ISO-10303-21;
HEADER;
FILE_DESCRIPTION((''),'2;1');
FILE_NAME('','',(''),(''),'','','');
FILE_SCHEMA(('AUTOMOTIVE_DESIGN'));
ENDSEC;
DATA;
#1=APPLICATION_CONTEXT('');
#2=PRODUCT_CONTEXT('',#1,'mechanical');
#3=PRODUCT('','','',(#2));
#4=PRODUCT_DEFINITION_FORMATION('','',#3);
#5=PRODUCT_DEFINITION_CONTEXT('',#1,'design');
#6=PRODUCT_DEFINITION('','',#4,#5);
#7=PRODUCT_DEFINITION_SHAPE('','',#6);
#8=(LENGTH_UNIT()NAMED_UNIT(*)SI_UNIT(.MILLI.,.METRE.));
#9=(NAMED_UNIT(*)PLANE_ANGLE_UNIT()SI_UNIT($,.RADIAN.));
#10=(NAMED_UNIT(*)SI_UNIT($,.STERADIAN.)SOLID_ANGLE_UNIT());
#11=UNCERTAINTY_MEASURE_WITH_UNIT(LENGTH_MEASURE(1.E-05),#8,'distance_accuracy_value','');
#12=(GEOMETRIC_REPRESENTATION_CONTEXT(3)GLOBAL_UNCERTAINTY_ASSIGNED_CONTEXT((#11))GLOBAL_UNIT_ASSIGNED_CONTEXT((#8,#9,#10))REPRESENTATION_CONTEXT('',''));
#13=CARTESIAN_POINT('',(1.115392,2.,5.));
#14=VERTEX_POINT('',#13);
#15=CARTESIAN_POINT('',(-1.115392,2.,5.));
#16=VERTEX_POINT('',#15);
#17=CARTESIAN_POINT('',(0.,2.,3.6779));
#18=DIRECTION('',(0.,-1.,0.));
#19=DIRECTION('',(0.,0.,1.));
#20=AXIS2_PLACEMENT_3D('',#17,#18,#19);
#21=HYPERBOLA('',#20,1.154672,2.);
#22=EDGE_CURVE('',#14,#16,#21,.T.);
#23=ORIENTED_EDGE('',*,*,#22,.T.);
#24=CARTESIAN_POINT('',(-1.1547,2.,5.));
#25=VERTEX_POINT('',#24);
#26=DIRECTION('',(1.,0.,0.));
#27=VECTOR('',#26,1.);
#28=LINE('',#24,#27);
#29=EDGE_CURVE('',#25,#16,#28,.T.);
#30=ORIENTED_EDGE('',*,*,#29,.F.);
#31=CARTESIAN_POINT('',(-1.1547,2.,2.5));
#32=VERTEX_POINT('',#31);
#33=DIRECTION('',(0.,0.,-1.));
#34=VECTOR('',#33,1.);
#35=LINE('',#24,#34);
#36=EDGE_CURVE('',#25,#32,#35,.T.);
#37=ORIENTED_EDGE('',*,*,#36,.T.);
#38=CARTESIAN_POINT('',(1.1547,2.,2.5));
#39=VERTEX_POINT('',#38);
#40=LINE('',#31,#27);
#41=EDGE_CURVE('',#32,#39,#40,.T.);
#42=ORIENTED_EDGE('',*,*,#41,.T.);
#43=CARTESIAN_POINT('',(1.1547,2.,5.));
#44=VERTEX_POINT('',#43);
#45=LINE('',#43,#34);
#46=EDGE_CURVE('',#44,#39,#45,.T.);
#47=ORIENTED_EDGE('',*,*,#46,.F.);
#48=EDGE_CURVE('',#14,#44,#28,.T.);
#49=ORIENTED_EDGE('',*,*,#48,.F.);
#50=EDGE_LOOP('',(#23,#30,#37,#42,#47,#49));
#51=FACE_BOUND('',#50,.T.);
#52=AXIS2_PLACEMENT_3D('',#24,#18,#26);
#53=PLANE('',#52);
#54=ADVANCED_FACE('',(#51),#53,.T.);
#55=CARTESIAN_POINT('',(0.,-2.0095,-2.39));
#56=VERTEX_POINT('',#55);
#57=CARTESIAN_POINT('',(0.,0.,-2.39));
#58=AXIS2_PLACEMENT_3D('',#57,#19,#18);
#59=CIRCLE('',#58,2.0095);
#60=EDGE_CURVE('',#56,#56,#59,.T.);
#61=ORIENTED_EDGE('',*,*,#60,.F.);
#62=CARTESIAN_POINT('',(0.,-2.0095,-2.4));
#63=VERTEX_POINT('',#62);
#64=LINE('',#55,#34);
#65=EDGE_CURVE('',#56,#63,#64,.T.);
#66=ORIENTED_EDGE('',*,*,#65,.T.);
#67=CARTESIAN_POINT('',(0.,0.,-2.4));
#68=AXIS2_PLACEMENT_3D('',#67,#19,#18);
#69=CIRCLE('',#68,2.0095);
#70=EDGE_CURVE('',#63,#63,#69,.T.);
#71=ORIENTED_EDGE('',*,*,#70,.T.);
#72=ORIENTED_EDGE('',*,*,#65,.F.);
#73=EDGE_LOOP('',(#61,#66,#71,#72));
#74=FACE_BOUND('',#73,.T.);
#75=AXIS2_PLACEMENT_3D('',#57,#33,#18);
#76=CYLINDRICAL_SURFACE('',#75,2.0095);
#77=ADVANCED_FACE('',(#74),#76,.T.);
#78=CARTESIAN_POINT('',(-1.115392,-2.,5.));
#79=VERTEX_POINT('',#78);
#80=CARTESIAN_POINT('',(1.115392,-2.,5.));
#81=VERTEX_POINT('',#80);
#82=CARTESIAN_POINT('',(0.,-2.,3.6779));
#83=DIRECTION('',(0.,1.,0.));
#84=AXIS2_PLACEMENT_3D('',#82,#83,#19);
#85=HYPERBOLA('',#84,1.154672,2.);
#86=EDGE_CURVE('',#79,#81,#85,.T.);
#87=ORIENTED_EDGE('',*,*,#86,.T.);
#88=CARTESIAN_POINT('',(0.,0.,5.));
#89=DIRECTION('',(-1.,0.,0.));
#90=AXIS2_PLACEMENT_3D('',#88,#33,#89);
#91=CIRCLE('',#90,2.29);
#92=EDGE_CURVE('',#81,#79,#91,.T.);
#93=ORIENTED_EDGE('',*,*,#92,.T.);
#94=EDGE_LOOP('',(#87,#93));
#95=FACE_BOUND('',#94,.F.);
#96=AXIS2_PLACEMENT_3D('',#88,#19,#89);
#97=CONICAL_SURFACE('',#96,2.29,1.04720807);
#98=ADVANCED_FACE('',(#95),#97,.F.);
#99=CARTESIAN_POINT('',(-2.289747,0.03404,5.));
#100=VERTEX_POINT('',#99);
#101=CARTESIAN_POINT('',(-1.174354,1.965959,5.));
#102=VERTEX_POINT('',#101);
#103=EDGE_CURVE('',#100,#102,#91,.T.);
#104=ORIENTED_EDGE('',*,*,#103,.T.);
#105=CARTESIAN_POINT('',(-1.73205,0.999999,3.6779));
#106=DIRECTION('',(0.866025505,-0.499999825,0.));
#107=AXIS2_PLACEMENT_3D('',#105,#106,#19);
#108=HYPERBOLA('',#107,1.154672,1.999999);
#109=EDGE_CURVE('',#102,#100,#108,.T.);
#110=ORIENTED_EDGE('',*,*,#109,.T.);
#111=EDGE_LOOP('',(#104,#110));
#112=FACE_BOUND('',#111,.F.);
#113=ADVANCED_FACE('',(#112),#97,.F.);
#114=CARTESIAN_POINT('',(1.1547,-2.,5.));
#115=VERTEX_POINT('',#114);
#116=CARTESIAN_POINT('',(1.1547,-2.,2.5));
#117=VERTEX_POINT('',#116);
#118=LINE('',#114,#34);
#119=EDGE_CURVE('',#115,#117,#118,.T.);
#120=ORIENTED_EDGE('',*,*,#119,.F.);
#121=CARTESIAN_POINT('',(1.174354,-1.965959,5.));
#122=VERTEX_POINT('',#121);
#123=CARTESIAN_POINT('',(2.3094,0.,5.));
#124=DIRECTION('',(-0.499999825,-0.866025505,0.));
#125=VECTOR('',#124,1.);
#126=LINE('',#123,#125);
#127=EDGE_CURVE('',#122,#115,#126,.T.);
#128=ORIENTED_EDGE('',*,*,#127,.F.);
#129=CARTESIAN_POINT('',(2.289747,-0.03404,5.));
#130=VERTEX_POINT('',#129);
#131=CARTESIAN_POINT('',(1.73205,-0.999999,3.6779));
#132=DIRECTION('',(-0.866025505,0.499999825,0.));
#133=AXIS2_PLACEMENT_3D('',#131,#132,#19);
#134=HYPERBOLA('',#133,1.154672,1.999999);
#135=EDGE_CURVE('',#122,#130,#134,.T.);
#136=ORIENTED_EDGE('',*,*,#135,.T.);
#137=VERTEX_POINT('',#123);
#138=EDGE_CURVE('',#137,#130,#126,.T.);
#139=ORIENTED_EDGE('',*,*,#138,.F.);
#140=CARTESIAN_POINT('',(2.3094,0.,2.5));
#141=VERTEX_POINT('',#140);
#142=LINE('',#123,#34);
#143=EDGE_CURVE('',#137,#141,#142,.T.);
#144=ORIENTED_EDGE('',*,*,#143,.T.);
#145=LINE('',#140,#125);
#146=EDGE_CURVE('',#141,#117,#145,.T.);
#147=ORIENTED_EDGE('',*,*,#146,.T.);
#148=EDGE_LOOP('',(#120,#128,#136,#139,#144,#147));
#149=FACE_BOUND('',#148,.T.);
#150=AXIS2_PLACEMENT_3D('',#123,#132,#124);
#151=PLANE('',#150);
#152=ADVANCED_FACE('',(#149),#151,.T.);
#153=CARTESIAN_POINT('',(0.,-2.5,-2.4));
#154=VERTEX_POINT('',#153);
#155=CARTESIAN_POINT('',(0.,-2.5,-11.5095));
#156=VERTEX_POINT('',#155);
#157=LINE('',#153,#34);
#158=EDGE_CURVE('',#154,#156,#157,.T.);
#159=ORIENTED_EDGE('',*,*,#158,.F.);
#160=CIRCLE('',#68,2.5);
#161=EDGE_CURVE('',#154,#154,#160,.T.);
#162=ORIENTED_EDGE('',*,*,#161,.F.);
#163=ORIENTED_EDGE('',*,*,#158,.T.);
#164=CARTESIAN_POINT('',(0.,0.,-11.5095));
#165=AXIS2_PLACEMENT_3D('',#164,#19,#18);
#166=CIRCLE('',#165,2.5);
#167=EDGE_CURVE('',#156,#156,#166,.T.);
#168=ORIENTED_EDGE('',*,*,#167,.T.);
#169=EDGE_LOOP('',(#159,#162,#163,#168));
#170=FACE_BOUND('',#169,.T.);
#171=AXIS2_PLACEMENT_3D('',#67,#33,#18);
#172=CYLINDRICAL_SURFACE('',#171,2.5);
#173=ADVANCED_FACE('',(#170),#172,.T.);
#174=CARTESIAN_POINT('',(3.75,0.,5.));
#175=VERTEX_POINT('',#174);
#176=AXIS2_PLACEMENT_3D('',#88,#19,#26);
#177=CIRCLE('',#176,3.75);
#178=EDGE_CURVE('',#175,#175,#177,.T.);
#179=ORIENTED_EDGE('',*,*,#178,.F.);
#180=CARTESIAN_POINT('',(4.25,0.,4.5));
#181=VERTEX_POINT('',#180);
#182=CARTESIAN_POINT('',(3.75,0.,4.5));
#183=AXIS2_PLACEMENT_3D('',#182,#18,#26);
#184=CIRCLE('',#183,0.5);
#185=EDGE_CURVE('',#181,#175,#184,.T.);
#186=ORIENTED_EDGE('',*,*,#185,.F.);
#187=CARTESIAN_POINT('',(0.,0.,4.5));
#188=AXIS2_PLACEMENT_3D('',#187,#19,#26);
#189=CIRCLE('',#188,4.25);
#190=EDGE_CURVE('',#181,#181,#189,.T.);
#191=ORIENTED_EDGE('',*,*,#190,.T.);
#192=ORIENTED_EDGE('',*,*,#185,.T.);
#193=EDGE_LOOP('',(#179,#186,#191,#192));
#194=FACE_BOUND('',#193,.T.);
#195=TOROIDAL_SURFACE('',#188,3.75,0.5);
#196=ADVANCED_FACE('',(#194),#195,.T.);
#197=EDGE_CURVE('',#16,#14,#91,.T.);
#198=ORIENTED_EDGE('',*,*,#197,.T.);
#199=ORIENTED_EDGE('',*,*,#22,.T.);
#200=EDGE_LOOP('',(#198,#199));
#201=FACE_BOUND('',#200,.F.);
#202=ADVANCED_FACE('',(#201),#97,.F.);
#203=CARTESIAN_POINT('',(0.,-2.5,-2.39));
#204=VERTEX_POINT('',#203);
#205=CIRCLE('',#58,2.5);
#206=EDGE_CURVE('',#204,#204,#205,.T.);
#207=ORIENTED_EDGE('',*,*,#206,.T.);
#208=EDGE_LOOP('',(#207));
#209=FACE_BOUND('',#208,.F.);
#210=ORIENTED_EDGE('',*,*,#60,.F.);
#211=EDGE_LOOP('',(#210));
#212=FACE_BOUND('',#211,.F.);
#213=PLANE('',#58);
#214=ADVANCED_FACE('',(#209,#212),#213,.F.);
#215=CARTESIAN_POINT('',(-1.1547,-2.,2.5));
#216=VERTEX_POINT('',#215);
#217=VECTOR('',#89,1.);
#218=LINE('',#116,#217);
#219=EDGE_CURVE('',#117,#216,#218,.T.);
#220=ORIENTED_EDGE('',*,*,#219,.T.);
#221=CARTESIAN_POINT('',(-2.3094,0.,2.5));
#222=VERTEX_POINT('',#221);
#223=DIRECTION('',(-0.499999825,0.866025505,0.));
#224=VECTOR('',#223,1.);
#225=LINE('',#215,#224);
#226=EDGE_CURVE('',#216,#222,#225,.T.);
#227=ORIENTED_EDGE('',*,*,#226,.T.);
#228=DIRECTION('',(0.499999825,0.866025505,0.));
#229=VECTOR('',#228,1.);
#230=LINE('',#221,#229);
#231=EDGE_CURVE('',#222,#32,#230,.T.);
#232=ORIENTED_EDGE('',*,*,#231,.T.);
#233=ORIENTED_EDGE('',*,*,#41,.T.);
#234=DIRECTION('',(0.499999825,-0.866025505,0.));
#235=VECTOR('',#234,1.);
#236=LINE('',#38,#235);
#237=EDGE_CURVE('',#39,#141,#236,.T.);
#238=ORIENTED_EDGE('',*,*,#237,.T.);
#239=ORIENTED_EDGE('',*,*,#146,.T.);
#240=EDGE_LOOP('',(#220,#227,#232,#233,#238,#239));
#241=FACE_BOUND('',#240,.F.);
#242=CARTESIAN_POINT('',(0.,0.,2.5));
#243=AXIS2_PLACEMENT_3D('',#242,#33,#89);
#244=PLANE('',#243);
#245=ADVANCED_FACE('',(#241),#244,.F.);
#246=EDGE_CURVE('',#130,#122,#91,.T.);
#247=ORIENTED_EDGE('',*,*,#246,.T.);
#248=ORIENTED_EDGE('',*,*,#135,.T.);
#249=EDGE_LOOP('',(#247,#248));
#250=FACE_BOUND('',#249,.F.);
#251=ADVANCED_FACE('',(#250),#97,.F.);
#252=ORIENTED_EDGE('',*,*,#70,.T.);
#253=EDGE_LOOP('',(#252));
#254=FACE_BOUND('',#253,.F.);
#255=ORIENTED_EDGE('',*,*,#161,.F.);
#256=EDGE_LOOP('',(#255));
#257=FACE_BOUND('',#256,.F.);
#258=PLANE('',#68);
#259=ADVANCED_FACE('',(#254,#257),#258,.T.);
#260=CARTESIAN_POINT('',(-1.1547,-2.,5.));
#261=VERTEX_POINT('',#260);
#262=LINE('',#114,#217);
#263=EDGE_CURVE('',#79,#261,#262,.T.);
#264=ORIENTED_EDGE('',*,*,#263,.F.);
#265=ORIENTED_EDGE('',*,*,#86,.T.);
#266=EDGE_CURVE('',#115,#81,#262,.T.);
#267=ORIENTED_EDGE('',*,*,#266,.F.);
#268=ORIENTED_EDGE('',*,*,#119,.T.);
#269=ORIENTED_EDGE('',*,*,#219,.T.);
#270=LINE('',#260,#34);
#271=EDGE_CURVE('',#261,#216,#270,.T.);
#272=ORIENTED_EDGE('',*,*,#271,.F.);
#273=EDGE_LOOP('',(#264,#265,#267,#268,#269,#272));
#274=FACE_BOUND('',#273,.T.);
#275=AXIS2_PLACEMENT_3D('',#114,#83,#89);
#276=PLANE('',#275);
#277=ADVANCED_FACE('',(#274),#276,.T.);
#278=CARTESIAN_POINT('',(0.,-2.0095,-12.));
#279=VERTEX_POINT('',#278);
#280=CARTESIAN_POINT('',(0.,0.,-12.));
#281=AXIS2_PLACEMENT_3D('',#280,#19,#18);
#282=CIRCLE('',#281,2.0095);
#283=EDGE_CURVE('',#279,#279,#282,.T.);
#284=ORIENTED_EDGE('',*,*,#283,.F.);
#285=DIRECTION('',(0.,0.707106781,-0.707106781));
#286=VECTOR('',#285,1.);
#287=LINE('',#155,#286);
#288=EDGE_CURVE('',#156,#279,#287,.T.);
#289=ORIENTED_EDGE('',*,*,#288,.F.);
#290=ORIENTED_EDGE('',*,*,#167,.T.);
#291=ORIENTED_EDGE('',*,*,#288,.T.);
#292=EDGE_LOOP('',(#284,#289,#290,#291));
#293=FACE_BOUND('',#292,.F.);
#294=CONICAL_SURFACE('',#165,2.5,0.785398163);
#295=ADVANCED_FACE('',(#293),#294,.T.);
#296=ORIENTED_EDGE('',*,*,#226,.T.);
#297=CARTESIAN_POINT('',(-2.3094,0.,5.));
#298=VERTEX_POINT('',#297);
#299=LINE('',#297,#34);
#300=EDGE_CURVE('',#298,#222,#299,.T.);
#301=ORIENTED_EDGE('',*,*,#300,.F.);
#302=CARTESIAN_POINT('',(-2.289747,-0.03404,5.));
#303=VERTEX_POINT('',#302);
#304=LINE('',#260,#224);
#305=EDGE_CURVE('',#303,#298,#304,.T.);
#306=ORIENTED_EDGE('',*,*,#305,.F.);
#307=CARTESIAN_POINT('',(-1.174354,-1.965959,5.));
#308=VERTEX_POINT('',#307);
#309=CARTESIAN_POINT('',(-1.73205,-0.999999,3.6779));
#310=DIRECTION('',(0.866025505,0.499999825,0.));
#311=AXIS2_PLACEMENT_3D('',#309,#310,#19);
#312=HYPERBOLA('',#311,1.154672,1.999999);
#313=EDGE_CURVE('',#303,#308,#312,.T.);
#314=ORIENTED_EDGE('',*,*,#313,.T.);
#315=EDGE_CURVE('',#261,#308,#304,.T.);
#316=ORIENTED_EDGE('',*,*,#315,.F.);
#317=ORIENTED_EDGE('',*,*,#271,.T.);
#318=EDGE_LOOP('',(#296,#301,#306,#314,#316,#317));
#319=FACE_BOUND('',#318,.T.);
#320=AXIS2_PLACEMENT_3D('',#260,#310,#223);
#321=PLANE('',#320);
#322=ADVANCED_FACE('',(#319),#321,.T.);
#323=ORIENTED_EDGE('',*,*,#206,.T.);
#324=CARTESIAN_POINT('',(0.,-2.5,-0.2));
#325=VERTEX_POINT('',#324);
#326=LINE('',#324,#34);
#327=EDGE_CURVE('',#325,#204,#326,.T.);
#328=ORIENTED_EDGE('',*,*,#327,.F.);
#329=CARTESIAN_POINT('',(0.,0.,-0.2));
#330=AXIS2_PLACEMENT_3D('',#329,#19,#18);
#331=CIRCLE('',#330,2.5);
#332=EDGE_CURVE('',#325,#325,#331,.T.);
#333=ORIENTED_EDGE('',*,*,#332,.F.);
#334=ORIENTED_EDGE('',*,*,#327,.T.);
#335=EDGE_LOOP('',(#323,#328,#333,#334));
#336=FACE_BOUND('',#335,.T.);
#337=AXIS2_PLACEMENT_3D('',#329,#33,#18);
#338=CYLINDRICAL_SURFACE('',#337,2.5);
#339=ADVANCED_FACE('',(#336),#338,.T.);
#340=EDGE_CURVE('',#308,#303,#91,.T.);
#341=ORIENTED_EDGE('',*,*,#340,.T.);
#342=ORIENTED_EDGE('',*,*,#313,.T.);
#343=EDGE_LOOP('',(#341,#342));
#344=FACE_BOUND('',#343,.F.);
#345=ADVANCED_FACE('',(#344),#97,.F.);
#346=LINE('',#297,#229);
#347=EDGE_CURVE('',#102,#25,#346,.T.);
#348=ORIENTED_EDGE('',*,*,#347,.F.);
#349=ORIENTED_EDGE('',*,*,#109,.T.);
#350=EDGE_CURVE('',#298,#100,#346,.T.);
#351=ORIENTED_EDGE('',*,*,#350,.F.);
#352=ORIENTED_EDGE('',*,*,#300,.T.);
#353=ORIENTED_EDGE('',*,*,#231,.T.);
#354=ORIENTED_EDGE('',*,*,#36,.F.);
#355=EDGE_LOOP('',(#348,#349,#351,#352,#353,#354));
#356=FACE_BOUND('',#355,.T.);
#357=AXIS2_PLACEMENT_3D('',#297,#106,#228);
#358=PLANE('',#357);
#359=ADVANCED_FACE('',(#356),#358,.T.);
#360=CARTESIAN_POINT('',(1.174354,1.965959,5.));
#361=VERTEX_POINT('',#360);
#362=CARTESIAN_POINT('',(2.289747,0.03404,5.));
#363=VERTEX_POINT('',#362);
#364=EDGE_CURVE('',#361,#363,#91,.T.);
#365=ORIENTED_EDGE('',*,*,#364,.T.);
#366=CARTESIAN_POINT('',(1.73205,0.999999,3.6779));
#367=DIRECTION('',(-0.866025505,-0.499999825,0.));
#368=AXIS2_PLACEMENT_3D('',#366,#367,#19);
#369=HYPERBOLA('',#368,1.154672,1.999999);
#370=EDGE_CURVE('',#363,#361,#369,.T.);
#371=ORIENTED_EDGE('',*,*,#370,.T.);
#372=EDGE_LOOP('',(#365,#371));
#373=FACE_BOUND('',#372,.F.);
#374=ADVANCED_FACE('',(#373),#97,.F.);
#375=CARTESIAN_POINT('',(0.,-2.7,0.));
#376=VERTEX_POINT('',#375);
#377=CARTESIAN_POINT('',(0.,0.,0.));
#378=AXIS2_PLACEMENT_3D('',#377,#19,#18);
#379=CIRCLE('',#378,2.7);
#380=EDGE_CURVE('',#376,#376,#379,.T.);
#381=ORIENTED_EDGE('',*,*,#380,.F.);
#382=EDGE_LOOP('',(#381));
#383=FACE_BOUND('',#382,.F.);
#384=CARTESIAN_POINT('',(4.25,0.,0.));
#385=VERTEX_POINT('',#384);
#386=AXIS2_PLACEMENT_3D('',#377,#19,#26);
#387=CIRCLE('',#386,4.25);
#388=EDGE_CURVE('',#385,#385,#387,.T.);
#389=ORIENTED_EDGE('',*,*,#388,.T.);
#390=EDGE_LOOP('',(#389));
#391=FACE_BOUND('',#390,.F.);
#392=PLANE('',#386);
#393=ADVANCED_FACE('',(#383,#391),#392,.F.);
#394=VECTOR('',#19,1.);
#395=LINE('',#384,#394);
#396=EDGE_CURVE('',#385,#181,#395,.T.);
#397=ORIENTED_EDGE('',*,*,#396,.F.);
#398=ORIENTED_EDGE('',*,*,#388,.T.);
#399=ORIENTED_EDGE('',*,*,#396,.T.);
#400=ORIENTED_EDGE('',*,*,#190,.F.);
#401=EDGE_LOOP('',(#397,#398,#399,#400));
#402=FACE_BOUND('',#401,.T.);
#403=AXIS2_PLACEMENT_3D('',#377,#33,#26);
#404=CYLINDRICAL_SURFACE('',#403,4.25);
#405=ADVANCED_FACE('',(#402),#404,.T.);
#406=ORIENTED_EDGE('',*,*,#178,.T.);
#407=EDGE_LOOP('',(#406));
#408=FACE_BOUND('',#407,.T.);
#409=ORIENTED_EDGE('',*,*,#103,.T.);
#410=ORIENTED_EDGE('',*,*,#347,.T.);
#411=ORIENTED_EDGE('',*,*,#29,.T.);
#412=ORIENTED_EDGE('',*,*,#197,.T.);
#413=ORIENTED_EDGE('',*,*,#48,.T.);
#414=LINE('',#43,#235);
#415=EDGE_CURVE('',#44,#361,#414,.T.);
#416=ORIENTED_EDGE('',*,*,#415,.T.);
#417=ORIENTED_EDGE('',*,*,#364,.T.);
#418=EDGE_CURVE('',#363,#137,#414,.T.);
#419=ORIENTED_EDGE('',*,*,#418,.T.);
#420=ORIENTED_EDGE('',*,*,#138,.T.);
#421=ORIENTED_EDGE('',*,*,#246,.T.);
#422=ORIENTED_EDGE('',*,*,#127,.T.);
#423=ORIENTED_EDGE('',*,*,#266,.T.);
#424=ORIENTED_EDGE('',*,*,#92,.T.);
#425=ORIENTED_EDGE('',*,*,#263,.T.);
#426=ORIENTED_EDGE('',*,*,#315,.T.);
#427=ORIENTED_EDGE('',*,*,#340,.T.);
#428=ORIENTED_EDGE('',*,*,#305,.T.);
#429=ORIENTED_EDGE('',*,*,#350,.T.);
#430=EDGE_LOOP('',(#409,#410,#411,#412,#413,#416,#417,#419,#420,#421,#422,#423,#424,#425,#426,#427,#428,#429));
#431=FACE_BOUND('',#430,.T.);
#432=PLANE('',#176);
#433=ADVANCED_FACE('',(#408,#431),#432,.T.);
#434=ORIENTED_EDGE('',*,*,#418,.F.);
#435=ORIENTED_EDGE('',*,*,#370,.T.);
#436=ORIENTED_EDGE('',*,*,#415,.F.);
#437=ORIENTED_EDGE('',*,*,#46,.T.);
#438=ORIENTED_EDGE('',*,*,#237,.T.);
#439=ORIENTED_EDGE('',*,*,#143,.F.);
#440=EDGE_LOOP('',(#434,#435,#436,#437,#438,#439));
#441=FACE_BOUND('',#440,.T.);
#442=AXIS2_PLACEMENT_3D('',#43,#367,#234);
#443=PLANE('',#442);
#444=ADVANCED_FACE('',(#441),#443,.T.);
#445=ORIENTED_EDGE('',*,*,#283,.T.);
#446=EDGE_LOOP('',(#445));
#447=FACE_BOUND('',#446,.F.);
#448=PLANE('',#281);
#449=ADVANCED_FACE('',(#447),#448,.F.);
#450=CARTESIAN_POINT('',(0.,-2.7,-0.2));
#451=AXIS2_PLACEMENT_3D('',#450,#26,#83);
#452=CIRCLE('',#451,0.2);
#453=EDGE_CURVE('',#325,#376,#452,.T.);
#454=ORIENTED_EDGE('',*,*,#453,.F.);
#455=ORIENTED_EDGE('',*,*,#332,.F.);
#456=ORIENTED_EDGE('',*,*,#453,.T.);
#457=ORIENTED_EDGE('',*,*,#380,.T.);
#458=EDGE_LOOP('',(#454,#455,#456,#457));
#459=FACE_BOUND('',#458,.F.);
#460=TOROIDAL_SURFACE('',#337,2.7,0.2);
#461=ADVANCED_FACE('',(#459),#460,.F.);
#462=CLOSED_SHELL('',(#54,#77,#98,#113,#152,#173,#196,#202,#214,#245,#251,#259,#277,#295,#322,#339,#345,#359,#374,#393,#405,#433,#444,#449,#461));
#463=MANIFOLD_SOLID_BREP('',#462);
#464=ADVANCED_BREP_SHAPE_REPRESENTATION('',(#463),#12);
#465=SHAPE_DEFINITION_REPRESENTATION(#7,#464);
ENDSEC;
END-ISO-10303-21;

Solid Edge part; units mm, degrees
sketch "Sketch1" plane through (0, 0, 0) normal (0, 0, 1) x (1, 0, 0)
  circle A0 centre (0, 0) radius 4.25
extrude "Protrusion1" add sketch "Sketch1" along normal blind 5
sketch "Sketch2" plane through (0, 0, 5) normal (0, 0, 1) x (0, 1, 0)
  line L0 (0, 2.3094) -> (2, 1.1547)
  line L1 (2, 1.1547) -> (2, -1.1547)
  line L2 (2, -1.1547) -> (0, -2.3094)
  line L3 (0, -2.3094) -> (-2, -1.1547)
  line L4 (-2, -1.1547) -> (-2, 1.1547)
  line L5 (-2, 1.1547) -> (0, 2.3094)
extrude "Cutout1" cut sketch "Sketch2" against normal blind 2.5
fillet "Round1" radius 0.5 1 edges at (-4.25, 0, 5)
sketch "Sketch3" plane through (0, 0, 0) normal (1, 0, 0) x (0, 1, 0)
  line L0 (-2.0095, -12) -> (0, -12)
  line L1 (-2.5, -11.5095) -> (-2.0095, -12)
  line L2 (-2.5, -2.4) -> (-2.5, -11.5095)
  line L3 (-2.0095, -2.4) -> (-2.5, -2.4)
  line L4 (-2.0095, -2.39) -> (-2.0095, -2.4)
  line L5 (-2.5, -2.39) -> (-2.0095, -2.39)
  line L6 (-2.5, -0.2) -> (-2.5, -2.39)
  arc A0 (-2.5, -0.2) -> (-2.7, 0) centre (-2.7, -0.2) ccw
  dimension "D1" = 2.4
  dimension "D2" = 0.01
  dimension "D3" = 0.2
  dimension "D4" = 12
revolve "RevolvedProtrusion1" add sketch "Sketch3" angle 360 about axis through (0, 0, -60.325) along (0, 0, 1) material side at (0, -1.0048, -11.95)
cosmetic_thread "Thread1"
sketch "Sketch4" plane through (0, 0, 0) normal (0, -1, 0) x (1, 0, 0)
  line L0 (-2.29, 5) -> (0, 3.6779)
revolve "RevolvedCutout1" cut sketch "Sketch4" angle 360 about axis through (0, 0, 57.15) along (0, 0, -1) material side at (-1.12, 0, 4.3823)
properties material "Steel"
